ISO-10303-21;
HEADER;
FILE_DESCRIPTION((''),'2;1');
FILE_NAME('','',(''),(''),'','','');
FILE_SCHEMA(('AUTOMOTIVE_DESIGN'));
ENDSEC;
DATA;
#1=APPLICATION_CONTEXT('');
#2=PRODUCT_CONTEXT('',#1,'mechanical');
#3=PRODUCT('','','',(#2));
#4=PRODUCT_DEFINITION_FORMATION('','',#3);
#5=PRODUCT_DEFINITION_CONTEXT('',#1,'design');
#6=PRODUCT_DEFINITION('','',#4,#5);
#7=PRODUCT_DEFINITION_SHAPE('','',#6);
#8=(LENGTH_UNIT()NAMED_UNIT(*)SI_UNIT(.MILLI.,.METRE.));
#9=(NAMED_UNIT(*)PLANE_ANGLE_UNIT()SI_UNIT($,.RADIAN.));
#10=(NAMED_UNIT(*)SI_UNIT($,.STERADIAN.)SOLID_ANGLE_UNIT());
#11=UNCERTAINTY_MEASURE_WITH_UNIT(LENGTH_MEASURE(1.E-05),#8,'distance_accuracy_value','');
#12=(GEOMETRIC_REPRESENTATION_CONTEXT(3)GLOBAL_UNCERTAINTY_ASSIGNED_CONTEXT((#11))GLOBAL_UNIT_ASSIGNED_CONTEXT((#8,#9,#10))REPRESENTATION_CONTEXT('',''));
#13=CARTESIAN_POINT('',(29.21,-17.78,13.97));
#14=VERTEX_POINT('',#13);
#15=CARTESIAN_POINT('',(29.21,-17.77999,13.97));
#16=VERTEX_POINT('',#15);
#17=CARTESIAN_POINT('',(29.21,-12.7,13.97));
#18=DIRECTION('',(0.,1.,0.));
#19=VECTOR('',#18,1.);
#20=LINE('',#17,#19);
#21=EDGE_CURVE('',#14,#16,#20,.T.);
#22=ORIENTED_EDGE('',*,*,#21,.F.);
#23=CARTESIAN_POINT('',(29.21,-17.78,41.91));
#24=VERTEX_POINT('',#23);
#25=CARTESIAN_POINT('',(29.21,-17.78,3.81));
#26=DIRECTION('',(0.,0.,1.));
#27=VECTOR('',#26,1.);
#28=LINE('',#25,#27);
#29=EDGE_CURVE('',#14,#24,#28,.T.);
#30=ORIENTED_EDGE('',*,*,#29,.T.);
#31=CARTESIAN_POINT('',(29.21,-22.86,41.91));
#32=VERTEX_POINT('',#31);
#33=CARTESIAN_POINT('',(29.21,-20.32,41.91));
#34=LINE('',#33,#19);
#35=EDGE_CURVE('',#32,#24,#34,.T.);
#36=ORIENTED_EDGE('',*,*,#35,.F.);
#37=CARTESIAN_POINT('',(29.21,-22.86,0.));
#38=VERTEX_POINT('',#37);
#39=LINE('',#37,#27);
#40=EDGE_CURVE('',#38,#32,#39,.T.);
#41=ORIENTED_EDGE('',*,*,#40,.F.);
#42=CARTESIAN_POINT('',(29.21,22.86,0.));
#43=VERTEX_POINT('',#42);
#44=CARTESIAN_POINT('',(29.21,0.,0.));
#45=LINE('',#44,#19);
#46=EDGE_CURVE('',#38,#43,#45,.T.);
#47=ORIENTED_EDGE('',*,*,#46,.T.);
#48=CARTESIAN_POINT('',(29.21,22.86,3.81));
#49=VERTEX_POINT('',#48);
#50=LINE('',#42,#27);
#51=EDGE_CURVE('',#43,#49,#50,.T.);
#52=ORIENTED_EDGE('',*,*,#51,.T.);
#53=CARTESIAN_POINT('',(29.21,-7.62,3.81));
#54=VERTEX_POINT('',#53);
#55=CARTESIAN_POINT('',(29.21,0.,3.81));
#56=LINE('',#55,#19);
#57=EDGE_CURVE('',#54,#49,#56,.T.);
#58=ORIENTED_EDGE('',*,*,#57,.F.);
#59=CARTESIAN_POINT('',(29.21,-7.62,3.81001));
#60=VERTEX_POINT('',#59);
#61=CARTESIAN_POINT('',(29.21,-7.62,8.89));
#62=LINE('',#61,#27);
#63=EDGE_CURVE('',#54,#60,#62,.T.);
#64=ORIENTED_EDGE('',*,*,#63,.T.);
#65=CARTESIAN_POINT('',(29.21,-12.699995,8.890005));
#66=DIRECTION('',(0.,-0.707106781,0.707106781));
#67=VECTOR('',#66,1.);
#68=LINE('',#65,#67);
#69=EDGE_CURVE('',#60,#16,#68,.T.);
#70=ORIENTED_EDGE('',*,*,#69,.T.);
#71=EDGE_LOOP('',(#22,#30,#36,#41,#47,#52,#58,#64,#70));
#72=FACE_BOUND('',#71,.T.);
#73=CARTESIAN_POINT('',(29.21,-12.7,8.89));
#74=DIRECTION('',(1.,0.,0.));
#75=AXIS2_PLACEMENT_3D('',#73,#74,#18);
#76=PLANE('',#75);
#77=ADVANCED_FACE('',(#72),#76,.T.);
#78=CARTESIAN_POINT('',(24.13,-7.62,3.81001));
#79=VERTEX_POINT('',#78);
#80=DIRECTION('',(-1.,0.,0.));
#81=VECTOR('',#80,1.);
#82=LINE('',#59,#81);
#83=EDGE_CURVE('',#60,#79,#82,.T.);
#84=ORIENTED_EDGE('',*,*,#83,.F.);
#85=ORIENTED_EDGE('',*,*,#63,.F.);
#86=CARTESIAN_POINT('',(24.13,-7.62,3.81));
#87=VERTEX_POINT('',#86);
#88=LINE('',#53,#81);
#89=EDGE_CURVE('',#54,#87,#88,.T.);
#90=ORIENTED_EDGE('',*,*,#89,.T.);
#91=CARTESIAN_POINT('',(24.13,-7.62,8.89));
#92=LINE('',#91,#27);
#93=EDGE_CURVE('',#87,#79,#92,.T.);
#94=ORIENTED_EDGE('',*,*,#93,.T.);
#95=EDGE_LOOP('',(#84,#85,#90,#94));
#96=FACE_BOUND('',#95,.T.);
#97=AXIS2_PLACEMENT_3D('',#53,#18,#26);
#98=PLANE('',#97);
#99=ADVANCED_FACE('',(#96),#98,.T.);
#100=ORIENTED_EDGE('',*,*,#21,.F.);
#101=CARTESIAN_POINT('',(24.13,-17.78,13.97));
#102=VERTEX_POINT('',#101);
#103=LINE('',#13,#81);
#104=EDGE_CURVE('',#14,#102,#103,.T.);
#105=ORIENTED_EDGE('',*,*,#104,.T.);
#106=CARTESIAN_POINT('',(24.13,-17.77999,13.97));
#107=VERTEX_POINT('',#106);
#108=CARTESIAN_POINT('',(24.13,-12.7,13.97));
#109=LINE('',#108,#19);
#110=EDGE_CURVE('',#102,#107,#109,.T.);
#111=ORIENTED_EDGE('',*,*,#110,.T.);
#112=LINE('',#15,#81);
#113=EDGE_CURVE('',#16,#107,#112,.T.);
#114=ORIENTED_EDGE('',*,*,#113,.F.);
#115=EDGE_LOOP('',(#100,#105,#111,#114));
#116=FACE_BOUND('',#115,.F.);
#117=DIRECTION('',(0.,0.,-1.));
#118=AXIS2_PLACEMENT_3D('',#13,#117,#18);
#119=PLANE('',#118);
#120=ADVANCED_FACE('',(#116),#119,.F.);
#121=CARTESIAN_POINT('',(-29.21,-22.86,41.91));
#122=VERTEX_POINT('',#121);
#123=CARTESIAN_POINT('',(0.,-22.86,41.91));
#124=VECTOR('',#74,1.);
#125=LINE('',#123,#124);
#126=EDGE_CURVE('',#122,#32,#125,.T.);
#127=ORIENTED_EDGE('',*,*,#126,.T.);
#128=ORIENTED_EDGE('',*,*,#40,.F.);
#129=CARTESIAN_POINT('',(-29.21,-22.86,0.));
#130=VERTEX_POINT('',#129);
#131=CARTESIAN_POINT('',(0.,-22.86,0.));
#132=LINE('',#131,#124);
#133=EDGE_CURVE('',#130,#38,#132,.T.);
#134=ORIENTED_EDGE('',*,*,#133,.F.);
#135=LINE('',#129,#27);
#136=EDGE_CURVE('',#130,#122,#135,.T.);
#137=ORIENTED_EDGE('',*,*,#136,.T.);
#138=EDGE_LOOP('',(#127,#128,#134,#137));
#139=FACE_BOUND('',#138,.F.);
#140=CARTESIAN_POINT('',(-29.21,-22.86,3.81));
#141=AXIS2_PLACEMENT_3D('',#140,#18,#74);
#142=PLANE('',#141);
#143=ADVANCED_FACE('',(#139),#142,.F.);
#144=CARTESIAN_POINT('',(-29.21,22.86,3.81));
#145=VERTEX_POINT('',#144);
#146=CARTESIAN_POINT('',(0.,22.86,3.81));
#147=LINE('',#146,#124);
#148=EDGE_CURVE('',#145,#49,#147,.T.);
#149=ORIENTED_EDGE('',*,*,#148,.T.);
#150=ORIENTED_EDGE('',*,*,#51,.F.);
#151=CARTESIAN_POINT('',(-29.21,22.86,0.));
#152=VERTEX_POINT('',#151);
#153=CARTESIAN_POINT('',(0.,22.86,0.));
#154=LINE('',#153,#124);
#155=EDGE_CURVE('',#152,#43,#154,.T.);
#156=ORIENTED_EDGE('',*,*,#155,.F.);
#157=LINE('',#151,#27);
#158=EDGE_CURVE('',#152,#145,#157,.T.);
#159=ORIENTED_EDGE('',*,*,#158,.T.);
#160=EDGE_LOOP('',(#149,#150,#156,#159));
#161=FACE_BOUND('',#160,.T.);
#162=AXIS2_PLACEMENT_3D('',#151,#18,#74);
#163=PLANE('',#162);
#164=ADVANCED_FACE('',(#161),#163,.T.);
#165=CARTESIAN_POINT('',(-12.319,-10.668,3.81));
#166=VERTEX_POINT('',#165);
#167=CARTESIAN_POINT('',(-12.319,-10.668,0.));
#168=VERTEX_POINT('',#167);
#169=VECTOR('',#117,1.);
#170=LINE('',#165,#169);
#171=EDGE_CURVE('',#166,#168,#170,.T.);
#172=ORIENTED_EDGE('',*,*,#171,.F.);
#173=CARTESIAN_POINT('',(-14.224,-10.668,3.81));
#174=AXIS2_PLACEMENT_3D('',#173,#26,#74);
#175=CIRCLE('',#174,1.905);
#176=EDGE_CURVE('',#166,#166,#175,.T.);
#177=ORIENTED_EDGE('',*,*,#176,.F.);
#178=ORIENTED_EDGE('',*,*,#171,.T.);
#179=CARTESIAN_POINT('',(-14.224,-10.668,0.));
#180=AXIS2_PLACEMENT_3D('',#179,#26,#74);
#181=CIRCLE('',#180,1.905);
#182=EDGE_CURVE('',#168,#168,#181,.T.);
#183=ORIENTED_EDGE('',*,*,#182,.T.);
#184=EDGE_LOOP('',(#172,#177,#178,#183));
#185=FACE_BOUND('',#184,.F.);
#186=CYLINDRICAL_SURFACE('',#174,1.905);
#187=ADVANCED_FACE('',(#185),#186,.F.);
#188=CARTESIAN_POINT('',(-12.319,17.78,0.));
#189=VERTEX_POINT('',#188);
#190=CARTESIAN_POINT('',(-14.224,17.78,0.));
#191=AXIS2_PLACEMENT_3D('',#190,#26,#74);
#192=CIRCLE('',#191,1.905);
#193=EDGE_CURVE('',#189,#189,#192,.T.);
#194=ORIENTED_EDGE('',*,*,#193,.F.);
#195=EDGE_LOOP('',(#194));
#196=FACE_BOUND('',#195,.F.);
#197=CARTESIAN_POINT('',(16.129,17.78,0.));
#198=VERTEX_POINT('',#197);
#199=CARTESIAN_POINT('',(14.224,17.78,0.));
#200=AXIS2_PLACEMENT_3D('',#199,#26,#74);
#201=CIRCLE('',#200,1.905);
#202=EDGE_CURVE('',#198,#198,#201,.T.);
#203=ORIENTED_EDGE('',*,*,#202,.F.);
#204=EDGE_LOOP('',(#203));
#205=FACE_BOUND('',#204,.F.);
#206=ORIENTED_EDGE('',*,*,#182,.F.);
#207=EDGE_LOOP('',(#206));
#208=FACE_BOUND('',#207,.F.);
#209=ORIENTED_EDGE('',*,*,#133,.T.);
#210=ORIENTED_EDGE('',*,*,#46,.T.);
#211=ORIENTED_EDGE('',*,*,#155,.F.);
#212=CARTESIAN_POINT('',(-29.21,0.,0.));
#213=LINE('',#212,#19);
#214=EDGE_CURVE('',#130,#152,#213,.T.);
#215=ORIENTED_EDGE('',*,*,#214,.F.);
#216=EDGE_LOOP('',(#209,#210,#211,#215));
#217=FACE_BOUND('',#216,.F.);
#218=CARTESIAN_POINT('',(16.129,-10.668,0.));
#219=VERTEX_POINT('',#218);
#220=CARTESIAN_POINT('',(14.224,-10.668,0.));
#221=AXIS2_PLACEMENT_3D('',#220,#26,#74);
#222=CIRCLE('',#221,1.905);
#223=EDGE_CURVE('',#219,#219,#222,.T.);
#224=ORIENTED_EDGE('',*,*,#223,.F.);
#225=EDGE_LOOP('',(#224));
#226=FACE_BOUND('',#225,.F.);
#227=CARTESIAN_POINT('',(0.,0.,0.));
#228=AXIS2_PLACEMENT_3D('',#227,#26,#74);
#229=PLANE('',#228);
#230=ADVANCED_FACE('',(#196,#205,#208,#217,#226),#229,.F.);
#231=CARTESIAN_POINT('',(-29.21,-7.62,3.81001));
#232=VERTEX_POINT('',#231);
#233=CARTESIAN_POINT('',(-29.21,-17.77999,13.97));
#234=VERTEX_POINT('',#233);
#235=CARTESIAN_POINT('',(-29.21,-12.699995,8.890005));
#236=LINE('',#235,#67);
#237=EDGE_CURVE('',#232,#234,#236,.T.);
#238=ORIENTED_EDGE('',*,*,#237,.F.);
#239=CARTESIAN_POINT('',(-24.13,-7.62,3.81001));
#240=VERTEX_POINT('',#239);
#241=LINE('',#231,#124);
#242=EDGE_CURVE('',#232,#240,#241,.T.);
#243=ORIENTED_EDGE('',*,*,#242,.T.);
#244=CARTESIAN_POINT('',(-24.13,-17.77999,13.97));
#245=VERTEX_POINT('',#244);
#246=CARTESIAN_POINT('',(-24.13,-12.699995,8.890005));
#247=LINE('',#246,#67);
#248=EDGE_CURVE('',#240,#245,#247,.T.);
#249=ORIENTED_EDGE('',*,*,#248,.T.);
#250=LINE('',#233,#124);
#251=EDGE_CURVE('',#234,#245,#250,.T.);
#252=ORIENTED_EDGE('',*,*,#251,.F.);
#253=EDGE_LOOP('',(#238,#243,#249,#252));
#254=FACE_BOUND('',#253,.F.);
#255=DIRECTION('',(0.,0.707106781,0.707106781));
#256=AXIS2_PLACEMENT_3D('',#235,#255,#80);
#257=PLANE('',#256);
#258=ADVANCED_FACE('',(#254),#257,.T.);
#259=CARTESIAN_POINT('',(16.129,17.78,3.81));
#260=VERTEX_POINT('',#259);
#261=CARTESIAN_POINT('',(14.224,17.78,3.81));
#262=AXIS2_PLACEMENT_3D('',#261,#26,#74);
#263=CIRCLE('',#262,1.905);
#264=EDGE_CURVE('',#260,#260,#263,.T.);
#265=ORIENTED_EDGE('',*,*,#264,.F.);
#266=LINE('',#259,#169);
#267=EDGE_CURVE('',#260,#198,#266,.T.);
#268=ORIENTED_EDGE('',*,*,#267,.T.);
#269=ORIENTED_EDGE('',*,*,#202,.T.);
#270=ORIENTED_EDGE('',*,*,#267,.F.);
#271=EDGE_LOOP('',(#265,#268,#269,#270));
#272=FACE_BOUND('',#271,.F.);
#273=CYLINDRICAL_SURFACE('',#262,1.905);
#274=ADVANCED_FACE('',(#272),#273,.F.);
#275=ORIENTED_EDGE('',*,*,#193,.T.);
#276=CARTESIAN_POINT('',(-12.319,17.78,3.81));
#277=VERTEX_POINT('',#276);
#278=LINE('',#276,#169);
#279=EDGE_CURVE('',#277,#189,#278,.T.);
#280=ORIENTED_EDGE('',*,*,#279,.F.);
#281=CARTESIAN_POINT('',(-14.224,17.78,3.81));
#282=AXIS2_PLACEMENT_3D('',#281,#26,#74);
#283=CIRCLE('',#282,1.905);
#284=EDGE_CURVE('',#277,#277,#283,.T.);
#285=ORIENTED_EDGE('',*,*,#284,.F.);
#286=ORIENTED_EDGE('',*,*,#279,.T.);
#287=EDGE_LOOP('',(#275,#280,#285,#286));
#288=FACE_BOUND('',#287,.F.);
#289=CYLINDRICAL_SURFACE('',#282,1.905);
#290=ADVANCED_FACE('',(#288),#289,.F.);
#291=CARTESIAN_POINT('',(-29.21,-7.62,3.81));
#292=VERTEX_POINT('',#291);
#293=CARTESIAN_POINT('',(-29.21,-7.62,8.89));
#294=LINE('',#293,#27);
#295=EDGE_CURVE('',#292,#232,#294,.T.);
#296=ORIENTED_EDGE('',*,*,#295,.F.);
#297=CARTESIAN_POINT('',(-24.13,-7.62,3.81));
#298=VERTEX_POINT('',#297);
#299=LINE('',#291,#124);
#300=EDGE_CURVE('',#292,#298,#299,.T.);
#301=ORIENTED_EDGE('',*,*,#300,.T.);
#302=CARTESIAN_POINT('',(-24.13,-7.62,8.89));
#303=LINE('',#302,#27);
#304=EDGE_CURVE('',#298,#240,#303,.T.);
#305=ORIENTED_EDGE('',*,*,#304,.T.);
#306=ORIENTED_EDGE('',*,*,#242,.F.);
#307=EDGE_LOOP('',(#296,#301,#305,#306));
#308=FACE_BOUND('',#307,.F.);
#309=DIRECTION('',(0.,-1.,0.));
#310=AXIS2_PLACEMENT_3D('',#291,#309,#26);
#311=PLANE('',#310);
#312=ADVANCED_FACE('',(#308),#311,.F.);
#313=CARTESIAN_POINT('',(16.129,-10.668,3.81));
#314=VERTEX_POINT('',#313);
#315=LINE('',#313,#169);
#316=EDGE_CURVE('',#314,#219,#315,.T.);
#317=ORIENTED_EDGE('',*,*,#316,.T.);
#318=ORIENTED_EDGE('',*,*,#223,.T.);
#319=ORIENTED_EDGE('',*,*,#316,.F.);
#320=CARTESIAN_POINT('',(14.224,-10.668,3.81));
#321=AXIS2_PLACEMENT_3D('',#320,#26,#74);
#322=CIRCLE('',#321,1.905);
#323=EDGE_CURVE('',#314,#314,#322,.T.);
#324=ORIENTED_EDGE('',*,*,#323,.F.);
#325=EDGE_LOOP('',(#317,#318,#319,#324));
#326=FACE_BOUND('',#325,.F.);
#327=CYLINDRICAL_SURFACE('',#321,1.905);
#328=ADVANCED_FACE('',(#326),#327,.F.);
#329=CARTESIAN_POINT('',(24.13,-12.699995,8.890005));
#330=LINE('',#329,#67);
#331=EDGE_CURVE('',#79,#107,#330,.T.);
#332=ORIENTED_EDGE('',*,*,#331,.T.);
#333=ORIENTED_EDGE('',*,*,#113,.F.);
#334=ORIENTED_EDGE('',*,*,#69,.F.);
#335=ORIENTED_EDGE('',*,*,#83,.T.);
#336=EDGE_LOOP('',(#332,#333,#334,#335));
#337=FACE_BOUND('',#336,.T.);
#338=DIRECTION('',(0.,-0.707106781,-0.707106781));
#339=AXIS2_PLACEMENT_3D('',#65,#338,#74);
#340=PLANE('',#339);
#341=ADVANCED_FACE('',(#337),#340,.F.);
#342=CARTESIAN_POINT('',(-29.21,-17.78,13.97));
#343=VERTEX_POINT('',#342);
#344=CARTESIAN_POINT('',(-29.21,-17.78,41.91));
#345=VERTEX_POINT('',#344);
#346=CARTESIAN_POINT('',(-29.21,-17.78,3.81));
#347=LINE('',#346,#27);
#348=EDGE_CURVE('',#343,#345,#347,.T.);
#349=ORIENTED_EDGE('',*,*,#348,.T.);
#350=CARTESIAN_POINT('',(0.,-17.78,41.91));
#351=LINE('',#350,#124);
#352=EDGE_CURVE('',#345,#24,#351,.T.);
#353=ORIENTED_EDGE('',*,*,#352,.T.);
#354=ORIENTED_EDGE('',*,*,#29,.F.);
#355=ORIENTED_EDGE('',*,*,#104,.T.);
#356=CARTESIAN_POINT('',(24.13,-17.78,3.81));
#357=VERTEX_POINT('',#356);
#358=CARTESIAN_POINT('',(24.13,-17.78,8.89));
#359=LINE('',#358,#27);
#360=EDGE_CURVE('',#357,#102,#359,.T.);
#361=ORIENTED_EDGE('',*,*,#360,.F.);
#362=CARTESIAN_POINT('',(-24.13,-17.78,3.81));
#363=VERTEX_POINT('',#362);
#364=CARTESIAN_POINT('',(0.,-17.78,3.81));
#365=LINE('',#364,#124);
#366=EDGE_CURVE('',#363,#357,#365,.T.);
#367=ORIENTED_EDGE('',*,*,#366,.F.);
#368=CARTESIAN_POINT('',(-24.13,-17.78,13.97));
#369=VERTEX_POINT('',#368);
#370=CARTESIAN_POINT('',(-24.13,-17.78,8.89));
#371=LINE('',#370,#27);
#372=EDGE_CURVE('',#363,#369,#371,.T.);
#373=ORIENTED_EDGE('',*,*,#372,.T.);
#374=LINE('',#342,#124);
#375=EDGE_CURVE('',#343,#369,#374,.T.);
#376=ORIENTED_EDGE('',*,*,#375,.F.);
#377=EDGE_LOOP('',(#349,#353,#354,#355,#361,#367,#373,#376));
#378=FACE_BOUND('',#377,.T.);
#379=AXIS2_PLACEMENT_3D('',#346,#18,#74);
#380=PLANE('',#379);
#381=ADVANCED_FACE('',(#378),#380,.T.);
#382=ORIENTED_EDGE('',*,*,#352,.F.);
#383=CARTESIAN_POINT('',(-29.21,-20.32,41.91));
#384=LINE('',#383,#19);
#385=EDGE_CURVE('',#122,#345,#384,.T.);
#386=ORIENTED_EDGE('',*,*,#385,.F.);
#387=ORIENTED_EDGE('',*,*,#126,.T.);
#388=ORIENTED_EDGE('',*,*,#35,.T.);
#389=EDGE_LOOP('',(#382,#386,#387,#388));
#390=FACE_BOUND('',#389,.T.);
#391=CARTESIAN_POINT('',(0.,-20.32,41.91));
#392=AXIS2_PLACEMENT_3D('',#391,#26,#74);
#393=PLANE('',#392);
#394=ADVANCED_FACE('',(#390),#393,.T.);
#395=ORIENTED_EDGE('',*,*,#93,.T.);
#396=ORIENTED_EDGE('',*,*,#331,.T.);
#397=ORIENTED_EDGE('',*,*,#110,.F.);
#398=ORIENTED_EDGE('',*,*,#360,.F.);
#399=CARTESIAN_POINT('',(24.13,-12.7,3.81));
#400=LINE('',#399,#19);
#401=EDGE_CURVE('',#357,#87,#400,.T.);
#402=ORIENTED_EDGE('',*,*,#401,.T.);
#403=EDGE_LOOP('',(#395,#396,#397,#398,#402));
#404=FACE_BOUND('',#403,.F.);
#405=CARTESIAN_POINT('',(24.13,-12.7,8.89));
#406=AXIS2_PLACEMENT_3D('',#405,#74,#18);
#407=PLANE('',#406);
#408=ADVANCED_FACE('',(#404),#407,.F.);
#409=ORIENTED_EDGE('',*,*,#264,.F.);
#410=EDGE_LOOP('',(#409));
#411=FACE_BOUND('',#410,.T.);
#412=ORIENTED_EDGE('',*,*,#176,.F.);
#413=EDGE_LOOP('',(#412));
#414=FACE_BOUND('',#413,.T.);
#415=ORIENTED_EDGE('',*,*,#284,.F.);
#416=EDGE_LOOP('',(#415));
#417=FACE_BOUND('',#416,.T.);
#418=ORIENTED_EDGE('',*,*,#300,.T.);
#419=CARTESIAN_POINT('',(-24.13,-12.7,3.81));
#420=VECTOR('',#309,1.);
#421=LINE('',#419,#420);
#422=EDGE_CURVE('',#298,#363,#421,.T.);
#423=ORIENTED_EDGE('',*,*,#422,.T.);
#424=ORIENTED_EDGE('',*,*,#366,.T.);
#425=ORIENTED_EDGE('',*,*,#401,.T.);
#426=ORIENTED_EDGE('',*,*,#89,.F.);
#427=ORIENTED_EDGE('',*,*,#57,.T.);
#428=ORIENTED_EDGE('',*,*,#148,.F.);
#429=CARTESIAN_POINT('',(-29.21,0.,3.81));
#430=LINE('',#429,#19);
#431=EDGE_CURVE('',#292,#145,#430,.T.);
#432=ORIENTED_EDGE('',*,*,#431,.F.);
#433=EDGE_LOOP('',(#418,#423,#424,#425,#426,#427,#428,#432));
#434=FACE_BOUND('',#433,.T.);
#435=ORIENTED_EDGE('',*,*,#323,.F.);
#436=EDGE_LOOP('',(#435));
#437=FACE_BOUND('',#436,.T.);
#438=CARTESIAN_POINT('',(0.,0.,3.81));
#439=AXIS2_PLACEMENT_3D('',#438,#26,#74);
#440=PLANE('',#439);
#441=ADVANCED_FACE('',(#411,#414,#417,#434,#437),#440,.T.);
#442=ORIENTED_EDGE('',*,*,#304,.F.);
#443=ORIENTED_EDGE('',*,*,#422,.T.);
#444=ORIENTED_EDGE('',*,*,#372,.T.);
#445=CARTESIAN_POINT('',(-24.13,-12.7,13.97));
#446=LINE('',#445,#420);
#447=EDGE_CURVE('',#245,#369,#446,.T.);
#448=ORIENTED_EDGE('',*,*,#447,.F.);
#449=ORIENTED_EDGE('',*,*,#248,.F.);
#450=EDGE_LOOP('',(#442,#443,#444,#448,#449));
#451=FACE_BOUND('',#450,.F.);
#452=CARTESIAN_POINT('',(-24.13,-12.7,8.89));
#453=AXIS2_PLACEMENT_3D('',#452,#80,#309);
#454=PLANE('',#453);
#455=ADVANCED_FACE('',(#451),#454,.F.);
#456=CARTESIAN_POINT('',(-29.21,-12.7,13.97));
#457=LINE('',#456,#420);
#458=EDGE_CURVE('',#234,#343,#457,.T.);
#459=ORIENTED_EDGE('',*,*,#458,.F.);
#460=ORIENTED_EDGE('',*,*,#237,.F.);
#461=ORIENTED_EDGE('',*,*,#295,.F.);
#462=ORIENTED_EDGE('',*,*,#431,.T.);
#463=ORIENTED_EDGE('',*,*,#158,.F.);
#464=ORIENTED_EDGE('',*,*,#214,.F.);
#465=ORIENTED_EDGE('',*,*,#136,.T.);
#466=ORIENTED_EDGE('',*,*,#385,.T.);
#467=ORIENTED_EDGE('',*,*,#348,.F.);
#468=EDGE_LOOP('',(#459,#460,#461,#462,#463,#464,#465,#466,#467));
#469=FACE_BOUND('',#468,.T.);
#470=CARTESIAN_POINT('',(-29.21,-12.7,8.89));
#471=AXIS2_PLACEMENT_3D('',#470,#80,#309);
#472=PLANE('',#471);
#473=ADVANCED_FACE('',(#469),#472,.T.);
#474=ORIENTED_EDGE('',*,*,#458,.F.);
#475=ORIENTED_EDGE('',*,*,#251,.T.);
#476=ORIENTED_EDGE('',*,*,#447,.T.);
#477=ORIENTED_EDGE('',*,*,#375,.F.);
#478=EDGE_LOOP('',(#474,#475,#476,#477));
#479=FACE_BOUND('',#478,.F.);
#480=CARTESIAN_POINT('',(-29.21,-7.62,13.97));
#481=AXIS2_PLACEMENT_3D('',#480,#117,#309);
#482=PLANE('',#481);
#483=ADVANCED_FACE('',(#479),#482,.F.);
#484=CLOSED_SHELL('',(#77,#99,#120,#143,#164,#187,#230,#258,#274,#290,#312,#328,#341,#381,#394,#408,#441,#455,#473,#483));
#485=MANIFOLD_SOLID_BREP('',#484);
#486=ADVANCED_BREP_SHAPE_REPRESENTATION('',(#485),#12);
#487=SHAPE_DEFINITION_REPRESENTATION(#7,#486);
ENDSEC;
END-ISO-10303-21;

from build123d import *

# Parameters (mm, degrees)
F0_W      = 58.42
F0_H      = 45.72
F1_DEPTH  = 3.81
F2_W      = 58.42
F2_H      = 5.08
F3_DEPTH  = 38.1
F4_R      = 1.905
F5_DEPTH  = 3.811
F6_W      = 10.16
F6_H      = 10.16
F7_DEPTH  = 5.08
F8_SIZE   = 10.15999
F9_W      = 10.16
F9_H      = 10.16
F10_DEPTH = 5.08
F11_SIZE  = 10.15999


# Not quite as in the source:
# - a fillet or chamfer is up to 0.001 mm smaller than in the source, because OpenCascade refuses the exact size


with BuildPart() as f1:
    # F0 (on Top) → F1 (new body)
    with BuildSketch(Plane.XY):
        Rectangle(F0_W, F0_H)
    extrude(amount=F1_DEPTH)

    # F2 (on face) → F3 (join)
    with BuildSketch(Plane.XY.offset(3.81)):
        with Locations((0, -20.32)):
            Rectangle(F2_W, F2_H)
    extrude(amount=F3_DEPTH)

    # F4 (on face) → F5 (cut, through all)
    with BuildSketch(Plane.XY.offset(3.81)):
        with Locations((-14.224, 17.78)):
            Circle(F4_R)
        with Locations((14.224, 17.78)):
            Circle(F4_R)
        with Locations((14.224, -10.668)):
            Circle(F4_R)
        with Locations((-14.224, -10.668)):
            Circle(F4_R)
    extrude(amount=-F5_DEPTH, mode=Mode.SUBTRACT)

    # F6 (on face) → F7 (join)
    with BuildSketch(Plane(origin=(-29.21, 0, 0), x_dir=(0, -1, 0), z_dir=(-1, 0, 0))):
        with Locations((12.7, 8.89)):
            Rectangle(F6_W, F6_H)
    extrude(amount=-F7_DEPTH)

    # F8 (size 10.16 in the source; OpenCascade refuses exactly that, so slightly less here)
    f8_edges = [f1.edges().sort_by_distance(p)[0] for p in [
        (-26.67, -7.62, 13.97),
    ]]
    chamfer(f8_edges, length=F8_SIZE)

    # F9 (on face) → F10 (join)
    with BuildSketch(Plane.YZ.offset(29.21)):
        with Locations((-12.7, 8.89)):
            Rectangle(F9_W, F9_H)
    extrude(amount=-F10_DEPTH)

    # F11 (size 10.16 in the source; OpenCascade refuses exactly that, so slightly less here)
    f11_edges = [f1.edges().sort_by_distance(p)[0] for p in [
        (26.67, -7.62, 13.97),
    ]]
    chamfer(f11_edges, length=F11_SIZE)


solid = f1.part
